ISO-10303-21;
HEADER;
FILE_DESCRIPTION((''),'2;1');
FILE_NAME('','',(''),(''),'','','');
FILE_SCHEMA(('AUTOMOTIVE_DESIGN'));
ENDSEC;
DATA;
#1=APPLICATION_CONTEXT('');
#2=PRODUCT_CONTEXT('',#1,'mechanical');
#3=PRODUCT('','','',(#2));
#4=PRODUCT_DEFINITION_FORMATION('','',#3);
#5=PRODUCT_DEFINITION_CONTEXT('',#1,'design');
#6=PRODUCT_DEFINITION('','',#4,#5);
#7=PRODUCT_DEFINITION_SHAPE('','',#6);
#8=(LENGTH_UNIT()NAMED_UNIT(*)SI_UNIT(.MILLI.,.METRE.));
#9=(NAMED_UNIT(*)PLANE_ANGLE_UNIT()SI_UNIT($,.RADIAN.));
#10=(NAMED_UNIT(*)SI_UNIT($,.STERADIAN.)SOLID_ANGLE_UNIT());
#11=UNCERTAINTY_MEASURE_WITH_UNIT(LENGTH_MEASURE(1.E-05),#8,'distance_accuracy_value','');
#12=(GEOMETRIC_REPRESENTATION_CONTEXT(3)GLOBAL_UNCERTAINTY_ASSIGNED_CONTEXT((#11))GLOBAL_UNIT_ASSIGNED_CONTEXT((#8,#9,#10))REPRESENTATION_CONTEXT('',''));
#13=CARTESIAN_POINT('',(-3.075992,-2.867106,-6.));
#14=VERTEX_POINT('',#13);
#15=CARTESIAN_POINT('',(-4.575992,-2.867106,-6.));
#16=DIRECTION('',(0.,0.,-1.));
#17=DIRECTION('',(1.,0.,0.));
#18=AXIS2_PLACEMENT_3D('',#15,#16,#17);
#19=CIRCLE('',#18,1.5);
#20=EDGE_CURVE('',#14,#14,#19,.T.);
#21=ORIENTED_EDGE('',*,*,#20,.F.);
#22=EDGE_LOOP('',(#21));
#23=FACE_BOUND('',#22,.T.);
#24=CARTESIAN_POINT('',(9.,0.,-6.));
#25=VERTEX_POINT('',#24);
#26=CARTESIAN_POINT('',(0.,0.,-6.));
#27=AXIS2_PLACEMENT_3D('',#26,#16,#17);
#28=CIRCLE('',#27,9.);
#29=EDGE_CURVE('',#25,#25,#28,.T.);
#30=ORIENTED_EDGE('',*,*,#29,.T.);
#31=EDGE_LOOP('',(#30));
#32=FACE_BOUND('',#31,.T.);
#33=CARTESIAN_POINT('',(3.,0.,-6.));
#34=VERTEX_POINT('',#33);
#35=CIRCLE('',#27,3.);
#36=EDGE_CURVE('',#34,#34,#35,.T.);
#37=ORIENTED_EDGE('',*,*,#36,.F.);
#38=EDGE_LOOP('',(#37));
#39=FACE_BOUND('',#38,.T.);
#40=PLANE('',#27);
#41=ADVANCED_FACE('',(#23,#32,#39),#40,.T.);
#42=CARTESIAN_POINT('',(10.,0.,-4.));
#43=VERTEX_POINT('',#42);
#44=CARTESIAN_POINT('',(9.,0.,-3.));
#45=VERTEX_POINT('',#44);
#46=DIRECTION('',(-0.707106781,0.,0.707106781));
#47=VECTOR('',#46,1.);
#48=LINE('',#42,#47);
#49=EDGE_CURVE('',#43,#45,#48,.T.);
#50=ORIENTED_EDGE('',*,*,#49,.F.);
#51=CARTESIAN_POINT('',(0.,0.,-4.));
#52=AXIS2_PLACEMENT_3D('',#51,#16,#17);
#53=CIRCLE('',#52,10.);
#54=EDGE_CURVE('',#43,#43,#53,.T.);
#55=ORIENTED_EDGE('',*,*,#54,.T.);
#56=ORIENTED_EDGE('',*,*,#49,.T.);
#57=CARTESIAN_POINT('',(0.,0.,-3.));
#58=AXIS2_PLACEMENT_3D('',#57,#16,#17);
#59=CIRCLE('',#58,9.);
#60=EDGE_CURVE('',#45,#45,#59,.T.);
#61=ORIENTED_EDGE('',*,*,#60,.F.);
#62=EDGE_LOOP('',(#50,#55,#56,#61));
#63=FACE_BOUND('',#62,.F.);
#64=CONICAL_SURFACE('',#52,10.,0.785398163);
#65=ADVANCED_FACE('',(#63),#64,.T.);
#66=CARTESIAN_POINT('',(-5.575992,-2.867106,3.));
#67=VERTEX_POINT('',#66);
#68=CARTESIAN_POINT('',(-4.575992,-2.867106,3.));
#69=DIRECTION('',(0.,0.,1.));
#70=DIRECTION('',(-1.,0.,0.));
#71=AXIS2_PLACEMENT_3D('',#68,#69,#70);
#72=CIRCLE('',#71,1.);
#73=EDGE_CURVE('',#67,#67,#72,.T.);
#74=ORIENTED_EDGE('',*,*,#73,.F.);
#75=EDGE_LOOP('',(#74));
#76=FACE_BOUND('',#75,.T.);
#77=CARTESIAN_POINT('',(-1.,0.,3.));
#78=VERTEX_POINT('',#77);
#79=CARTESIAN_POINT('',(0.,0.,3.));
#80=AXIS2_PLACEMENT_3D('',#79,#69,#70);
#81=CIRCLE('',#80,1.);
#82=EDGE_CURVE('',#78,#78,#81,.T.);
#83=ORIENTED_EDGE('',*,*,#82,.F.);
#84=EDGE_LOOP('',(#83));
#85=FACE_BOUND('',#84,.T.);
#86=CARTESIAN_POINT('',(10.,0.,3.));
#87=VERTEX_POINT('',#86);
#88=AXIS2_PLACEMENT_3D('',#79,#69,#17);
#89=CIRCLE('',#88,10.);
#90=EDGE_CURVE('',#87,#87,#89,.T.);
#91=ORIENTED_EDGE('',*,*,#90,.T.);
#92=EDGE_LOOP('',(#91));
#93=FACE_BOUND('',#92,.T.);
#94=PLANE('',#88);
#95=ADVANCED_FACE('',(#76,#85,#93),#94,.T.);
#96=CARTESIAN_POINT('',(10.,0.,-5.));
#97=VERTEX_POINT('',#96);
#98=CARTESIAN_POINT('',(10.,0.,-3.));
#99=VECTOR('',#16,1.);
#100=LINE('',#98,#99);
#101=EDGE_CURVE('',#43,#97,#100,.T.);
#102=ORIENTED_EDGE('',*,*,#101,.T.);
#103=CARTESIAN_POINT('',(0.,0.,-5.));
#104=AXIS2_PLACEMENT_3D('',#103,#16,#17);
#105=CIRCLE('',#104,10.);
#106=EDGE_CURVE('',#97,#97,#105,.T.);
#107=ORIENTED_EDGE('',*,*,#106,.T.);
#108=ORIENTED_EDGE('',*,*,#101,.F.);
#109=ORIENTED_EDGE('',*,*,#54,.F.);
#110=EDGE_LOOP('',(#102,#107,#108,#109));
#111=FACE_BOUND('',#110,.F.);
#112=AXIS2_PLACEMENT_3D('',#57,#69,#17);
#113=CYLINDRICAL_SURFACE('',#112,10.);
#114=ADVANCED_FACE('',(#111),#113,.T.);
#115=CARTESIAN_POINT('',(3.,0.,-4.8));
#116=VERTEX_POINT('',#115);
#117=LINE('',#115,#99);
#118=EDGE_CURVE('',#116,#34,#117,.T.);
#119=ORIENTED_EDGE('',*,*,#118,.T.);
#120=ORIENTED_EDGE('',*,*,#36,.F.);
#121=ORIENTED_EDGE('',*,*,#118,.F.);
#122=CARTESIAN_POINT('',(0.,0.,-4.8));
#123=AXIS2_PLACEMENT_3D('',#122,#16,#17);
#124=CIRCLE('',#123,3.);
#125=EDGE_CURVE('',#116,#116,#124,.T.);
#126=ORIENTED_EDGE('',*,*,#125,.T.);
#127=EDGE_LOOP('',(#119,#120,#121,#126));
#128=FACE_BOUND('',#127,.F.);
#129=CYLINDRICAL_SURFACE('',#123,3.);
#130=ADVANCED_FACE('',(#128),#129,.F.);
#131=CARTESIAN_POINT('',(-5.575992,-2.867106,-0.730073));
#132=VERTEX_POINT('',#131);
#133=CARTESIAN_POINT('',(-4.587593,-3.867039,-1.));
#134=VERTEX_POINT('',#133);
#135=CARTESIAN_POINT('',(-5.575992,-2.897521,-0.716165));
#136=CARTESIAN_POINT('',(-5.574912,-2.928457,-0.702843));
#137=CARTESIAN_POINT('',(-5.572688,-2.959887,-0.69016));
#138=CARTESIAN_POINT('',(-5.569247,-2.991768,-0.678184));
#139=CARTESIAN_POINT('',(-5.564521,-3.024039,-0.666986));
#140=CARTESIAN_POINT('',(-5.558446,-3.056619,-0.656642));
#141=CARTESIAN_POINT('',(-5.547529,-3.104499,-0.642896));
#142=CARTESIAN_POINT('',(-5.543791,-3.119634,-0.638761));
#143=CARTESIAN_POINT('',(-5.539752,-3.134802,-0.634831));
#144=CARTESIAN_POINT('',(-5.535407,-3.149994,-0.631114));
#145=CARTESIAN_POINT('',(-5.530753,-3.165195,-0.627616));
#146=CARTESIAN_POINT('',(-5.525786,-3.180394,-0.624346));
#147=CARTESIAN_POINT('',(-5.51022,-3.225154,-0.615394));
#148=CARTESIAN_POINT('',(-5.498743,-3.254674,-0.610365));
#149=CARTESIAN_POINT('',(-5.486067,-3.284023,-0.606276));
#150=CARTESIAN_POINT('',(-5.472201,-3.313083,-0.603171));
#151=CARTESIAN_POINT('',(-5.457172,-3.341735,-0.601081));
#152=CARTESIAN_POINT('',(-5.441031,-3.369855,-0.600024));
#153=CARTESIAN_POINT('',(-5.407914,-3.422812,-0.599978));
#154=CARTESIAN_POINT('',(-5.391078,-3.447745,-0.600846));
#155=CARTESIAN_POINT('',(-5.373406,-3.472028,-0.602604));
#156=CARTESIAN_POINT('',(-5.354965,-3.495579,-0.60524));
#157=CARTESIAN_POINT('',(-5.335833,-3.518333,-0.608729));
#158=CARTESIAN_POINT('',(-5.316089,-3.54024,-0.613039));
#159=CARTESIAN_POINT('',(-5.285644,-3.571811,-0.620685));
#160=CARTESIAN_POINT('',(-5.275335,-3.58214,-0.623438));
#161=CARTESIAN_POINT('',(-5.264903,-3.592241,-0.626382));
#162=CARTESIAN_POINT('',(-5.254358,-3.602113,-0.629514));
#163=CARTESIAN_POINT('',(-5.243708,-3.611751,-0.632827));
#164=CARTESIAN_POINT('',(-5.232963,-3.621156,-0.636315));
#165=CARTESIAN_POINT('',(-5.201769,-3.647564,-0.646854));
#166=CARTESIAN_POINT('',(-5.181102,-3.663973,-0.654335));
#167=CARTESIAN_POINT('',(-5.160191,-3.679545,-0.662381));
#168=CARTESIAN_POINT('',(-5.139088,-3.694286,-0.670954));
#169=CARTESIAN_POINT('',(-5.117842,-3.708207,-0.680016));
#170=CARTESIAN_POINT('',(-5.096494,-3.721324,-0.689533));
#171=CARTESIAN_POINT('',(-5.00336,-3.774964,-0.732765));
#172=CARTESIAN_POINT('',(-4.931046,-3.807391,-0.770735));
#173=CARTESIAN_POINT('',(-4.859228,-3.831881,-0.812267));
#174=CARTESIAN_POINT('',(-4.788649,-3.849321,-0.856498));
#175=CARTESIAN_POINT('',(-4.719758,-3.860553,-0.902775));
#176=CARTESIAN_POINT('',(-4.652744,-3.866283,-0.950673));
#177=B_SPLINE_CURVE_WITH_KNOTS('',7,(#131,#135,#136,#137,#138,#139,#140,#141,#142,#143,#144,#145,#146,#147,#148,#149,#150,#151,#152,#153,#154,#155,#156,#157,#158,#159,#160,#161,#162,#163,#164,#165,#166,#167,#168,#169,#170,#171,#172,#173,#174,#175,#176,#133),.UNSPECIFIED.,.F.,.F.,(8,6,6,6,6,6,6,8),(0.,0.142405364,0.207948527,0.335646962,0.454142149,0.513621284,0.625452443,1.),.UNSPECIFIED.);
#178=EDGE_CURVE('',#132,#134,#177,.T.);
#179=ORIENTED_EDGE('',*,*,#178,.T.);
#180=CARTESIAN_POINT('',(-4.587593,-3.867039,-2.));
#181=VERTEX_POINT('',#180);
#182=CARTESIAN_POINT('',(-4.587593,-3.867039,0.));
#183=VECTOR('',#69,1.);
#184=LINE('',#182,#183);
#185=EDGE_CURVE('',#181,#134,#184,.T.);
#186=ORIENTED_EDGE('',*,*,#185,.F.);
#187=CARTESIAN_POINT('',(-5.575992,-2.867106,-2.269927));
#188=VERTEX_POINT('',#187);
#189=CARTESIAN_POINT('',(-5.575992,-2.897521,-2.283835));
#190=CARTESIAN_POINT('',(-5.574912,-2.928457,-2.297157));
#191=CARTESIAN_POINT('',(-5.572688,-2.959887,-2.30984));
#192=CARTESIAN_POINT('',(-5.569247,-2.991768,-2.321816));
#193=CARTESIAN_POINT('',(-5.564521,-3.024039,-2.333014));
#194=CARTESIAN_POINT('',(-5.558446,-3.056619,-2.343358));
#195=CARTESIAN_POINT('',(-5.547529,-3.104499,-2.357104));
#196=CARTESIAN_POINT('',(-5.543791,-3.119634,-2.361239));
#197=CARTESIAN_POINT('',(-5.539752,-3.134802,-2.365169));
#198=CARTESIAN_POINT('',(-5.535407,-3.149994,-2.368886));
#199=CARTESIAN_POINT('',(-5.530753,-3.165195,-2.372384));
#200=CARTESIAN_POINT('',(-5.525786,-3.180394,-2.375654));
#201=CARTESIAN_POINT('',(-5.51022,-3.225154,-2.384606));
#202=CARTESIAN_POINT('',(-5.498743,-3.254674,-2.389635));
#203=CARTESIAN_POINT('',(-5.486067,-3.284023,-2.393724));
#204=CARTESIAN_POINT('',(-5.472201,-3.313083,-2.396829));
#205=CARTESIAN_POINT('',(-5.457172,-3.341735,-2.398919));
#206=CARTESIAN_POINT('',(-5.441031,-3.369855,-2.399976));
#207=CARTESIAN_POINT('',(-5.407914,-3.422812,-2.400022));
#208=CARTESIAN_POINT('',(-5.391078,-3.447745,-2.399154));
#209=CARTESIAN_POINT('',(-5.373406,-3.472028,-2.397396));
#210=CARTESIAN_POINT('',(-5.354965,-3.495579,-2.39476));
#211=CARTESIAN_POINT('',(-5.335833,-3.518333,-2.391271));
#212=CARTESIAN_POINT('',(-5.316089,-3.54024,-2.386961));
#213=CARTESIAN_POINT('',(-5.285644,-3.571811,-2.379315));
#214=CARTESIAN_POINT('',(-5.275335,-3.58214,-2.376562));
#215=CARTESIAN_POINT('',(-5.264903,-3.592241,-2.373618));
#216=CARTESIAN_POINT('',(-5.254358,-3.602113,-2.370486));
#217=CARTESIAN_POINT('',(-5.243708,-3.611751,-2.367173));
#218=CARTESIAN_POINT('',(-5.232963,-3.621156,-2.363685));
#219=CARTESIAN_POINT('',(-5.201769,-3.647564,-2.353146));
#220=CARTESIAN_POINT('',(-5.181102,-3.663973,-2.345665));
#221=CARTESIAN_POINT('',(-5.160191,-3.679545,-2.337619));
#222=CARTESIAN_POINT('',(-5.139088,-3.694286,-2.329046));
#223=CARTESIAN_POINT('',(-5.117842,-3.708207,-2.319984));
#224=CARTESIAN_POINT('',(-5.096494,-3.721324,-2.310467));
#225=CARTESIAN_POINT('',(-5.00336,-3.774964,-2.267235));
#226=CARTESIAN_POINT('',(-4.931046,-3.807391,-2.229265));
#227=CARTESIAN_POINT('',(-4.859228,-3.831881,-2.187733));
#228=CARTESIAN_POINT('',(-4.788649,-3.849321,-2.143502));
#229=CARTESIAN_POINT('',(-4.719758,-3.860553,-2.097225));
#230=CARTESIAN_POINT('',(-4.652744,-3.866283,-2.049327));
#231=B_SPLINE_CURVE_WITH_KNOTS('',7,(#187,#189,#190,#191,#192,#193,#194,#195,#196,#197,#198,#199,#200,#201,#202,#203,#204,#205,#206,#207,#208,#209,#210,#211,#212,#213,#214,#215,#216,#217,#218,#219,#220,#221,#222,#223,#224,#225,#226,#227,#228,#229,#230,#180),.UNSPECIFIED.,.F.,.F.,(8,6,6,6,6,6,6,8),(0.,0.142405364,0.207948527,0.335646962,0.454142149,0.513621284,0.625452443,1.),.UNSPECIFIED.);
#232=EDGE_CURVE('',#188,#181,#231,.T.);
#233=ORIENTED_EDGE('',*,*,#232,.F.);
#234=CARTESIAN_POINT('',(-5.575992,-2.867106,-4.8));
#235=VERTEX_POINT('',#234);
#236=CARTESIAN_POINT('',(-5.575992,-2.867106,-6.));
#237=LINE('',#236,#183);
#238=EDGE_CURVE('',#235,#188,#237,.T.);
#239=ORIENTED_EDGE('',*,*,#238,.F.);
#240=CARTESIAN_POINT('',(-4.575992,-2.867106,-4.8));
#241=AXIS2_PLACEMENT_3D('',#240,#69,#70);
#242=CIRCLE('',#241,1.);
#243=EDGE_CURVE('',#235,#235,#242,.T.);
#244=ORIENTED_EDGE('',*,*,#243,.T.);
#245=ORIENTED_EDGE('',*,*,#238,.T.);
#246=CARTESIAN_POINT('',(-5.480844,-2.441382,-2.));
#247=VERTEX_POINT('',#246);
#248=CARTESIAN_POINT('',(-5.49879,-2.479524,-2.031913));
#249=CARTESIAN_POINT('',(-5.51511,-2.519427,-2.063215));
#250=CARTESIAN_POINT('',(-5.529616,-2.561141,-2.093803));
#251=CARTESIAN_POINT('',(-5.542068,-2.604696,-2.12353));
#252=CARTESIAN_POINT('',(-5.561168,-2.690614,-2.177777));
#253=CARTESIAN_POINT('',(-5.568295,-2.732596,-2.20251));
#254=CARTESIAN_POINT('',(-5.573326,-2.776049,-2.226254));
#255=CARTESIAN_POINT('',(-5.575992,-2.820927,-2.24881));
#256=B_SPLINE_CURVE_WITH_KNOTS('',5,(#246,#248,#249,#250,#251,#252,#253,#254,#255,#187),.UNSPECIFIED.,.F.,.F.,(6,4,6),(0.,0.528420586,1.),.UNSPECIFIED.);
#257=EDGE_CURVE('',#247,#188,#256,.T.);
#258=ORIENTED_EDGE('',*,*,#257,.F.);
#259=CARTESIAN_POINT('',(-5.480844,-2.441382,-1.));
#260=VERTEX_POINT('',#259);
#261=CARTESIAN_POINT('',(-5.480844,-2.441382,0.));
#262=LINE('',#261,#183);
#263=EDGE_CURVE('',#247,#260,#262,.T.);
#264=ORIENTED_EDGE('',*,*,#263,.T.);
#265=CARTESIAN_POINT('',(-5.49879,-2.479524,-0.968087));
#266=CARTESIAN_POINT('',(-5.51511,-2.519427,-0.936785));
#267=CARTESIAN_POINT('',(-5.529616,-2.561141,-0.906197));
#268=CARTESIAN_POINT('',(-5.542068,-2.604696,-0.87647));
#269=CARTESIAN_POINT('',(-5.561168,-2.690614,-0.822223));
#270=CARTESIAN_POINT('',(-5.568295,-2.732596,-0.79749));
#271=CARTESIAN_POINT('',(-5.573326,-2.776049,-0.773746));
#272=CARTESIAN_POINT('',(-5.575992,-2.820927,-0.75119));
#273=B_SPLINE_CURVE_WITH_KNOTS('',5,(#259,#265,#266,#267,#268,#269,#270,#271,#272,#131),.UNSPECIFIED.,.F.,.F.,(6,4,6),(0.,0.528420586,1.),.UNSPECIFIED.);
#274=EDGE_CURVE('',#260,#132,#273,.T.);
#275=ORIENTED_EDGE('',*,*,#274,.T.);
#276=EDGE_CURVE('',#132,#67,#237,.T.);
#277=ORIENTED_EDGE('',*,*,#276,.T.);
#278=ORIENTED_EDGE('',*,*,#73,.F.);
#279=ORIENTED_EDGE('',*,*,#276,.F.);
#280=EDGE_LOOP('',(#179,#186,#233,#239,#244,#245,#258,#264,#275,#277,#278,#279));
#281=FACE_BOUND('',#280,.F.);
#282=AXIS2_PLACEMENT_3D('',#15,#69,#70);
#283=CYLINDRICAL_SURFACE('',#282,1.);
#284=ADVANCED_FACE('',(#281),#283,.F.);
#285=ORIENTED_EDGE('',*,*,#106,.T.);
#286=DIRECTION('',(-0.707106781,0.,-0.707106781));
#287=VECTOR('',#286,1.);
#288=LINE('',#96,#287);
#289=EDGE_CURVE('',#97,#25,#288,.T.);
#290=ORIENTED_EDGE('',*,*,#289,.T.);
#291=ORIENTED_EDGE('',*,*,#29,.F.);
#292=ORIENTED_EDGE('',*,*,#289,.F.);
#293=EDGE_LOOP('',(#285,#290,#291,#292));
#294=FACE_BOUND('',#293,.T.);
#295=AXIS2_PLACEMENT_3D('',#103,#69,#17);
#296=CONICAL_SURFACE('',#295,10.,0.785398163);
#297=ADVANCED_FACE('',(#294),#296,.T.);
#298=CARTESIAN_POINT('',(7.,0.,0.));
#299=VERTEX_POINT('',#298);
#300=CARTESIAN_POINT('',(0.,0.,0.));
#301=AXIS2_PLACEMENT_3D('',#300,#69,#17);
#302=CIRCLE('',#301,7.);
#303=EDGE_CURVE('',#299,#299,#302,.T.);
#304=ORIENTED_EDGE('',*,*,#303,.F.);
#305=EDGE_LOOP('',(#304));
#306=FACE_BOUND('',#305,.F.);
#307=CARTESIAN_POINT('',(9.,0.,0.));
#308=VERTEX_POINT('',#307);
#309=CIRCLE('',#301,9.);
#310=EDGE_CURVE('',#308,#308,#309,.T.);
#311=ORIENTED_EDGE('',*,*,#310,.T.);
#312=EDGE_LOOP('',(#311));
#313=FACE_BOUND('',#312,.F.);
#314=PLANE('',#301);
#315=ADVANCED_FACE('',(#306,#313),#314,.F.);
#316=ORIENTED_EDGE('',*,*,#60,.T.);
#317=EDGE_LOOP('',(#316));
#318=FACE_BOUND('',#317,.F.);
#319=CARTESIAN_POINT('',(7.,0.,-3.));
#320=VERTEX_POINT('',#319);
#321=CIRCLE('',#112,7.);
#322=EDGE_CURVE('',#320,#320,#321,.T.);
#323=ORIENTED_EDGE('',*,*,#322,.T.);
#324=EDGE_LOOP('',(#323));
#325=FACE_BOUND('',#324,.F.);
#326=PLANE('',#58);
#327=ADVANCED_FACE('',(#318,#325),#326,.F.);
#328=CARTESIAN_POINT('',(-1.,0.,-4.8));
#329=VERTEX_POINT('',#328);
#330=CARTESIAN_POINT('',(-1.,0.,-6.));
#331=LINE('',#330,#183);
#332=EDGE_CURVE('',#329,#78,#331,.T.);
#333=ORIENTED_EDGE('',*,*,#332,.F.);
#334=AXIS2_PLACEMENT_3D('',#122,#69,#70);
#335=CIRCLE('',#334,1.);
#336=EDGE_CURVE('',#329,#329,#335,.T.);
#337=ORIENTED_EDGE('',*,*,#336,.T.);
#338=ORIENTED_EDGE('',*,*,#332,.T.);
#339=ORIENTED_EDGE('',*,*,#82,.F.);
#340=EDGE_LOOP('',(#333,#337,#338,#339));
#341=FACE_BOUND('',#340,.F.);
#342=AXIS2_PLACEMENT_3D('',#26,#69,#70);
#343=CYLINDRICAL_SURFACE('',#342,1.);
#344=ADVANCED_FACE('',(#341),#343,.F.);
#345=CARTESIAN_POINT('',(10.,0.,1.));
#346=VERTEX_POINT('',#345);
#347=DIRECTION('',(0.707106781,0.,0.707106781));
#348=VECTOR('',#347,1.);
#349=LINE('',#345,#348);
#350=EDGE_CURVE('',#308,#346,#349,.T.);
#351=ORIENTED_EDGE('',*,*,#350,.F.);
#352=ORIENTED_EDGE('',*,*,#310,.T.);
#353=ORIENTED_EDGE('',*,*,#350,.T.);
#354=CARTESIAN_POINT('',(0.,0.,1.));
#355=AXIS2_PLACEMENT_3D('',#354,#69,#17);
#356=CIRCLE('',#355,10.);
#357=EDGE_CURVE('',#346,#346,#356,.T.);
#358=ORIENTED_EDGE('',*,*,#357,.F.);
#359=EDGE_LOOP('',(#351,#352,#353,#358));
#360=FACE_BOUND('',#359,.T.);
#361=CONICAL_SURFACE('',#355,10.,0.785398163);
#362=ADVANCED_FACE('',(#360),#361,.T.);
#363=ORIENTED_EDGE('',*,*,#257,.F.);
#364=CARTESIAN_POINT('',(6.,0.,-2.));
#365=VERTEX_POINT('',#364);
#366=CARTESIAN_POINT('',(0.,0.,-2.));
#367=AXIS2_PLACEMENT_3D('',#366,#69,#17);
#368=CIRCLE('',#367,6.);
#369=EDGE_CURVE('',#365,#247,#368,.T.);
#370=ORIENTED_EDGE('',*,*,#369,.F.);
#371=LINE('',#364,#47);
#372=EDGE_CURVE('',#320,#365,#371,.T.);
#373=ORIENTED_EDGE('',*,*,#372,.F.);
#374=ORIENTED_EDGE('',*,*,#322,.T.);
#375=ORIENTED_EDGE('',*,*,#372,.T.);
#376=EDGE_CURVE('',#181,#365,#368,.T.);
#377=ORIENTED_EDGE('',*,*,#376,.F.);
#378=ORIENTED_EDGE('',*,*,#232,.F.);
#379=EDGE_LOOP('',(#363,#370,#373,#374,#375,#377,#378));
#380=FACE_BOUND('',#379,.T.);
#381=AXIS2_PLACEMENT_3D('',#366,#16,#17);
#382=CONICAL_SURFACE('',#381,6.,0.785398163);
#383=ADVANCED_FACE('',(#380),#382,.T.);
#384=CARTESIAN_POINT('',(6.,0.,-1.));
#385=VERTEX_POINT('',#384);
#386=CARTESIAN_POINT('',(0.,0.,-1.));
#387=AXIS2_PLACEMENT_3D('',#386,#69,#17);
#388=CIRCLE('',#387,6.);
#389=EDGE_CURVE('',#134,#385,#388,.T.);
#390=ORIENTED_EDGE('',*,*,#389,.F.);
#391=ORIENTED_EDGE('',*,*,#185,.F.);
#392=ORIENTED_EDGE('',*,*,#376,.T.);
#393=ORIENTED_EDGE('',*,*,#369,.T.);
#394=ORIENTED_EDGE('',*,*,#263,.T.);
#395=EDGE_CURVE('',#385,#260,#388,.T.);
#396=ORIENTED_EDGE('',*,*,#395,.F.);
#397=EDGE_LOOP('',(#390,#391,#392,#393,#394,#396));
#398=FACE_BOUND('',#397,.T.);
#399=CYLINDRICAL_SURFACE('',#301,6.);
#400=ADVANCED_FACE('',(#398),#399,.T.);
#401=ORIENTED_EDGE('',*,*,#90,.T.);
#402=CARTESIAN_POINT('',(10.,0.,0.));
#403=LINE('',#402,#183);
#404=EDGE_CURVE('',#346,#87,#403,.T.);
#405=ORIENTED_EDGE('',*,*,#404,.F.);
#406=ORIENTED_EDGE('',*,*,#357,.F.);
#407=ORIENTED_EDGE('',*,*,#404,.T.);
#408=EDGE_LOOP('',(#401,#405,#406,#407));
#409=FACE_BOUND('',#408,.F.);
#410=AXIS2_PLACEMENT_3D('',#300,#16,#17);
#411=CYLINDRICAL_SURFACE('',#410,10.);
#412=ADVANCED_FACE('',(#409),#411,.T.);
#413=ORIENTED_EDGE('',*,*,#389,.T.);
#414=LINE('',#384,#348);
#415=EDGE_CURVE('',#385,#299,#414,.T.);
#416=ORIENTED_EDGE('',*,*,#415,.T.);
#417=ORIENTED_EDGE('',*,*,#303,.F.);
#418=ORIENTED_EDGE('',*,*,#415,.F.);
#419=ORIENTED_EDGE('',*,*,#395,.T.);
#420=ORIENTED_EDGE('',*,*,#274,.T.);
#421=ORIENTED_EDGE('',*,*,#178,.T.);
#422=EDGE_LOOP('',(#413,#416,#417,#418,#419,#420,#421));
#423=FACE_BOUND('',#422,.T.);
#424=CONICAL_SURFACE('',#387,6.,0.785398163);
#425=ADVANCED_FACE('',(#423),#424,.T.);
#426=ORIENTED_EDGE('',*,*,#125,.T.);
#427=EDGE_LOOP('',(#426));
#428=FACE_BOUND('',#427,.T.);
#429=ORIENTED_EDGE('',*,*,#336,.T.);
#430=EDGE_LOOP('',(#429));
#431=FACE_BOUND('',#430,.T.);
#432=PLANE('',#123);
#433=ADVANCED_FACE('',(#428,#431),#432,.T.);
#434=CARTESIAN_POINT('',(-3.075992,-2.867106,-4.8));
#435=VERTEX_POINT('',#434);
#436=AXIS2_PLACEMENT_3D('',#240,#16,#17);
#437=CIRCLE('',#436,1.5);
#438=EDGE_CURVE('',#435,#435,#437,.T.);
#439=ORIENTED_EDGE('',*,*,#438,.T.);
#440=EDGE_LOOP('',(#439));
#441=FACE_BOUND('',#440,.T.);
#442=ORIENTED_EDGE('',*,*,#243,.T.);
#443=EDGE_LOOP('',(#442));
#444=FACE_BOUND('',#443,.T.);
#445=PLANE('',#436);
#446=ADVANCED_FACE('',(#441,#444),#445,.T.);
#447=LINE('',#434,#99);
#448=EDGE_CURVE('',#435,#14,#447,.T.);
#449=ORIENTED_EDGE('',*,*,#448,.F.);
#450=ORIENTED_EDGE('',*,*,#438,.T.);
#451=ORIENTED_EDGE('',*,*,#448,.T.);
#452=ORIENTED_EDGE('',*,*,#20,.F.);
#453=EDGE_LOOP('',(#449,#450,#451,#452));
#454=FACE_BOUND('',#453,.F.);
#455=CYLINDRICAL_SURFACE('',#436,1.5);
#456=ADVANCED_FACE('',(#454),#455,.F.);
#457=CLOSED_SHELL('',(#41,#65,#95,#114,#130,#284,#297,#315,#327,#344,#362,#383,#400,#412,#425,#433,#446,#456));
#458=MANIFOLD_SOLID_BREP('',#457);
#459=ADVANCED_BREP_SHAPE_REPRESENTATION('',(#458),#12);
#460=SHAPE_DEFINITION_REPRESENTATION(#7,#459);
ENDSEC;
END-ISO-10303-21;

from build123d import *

# Parameters (mm, degrees)
F0_R            = 10
F1_DEPTH        = 3
F2_R            = 6
F3_DEPTH        = 3
F4_R            = 10
F4_R_2          = 6
F5_DEPTH        = 3
F6_SIZE         = 1
F8_D            = 2
F8_DEPTH        = 27
F8_CBORE_D      = 6
F8_CBORE_DEPTH  = 1.2
F8_TIP          = 0.600860619
F10_D           = 2
F10_DEPTH       = 9
F10_CBORE_D     = 3
F10_CBORE_DEPTH = 1.2
F10_TIP         = 0.600860619


with BuildPart() as f1:
    # F0 (on Top) → F1 (new body)
    with BuildSketch(Plane.XY):
        Circle(F0_R)
    extrude(amount=F1_DEPTH)

    # F2 (on face) → F3 (join)
    with BuildSketch(Plane.XY):
        Circle(F2_R)
    extrude(amount=-F3_DEPTH)

    # F4 (on face) → F5 (join)
    with BuildSketch(Plane(origin=(0, 0, -3), x_dir=(1, 0, 0), z_dir=(0, 0, -1))):
        Circle(F4_R)
        Circle(F4_R_2, mode=Mode.SUBTRACT)
        Circle(F4_R_2)
    extrude(amount=F5_DEPTH)

    # F6
    f6_edges = [f1.edges().sort_by_distance(p)[0] for p in [
        (-6, 0, 0),
        (-10, 0, -3),
        (-10, 0, 0),
        (-6, 0, -3),
        (-10, 0, -6),
    ]]
    chamfer(f6_edges, length=F6_SIZE)

    # F8
    with Locations(Plane(origin=(0, 0, -6), x_dir=(1, 0, 0), z_dir=(0, 0, -1))):
        with Locations((0, 0)):
            CounterBoreHole(F8_D / 2, F8_CBORE_D / 2, F8_CBORE_DEPTH, depth=F8_DEPTH)
            with Locations((0, 0, -(F8_DEPTH + F8_TIP / 2))):  # 118° drill point
                Cone(0, F8_D / 2, F8_TIP, mode=Mode.SUBTRACT)

    # F10
    with Locations(Plane(origin=(0, 0, -6), x_dir=(1, 0, 0), z_dir=(0, 0, -1))):
        with Locations((-4.575991758, 2.8671064562)):
            CounterBoreHole(F10_D / 2, F10_CBORE_D / 2, F10_CBORE_DEPTH, depth=F10_DEPTH)
            with Locations((0, 0, -(F10_DEPTH + F10_TIP / 2))):  # 118° drill point
                Cone(0, F10_D / 2, F10_TIP, mode=Mode.SUBTRACT)


solid = f1.part
